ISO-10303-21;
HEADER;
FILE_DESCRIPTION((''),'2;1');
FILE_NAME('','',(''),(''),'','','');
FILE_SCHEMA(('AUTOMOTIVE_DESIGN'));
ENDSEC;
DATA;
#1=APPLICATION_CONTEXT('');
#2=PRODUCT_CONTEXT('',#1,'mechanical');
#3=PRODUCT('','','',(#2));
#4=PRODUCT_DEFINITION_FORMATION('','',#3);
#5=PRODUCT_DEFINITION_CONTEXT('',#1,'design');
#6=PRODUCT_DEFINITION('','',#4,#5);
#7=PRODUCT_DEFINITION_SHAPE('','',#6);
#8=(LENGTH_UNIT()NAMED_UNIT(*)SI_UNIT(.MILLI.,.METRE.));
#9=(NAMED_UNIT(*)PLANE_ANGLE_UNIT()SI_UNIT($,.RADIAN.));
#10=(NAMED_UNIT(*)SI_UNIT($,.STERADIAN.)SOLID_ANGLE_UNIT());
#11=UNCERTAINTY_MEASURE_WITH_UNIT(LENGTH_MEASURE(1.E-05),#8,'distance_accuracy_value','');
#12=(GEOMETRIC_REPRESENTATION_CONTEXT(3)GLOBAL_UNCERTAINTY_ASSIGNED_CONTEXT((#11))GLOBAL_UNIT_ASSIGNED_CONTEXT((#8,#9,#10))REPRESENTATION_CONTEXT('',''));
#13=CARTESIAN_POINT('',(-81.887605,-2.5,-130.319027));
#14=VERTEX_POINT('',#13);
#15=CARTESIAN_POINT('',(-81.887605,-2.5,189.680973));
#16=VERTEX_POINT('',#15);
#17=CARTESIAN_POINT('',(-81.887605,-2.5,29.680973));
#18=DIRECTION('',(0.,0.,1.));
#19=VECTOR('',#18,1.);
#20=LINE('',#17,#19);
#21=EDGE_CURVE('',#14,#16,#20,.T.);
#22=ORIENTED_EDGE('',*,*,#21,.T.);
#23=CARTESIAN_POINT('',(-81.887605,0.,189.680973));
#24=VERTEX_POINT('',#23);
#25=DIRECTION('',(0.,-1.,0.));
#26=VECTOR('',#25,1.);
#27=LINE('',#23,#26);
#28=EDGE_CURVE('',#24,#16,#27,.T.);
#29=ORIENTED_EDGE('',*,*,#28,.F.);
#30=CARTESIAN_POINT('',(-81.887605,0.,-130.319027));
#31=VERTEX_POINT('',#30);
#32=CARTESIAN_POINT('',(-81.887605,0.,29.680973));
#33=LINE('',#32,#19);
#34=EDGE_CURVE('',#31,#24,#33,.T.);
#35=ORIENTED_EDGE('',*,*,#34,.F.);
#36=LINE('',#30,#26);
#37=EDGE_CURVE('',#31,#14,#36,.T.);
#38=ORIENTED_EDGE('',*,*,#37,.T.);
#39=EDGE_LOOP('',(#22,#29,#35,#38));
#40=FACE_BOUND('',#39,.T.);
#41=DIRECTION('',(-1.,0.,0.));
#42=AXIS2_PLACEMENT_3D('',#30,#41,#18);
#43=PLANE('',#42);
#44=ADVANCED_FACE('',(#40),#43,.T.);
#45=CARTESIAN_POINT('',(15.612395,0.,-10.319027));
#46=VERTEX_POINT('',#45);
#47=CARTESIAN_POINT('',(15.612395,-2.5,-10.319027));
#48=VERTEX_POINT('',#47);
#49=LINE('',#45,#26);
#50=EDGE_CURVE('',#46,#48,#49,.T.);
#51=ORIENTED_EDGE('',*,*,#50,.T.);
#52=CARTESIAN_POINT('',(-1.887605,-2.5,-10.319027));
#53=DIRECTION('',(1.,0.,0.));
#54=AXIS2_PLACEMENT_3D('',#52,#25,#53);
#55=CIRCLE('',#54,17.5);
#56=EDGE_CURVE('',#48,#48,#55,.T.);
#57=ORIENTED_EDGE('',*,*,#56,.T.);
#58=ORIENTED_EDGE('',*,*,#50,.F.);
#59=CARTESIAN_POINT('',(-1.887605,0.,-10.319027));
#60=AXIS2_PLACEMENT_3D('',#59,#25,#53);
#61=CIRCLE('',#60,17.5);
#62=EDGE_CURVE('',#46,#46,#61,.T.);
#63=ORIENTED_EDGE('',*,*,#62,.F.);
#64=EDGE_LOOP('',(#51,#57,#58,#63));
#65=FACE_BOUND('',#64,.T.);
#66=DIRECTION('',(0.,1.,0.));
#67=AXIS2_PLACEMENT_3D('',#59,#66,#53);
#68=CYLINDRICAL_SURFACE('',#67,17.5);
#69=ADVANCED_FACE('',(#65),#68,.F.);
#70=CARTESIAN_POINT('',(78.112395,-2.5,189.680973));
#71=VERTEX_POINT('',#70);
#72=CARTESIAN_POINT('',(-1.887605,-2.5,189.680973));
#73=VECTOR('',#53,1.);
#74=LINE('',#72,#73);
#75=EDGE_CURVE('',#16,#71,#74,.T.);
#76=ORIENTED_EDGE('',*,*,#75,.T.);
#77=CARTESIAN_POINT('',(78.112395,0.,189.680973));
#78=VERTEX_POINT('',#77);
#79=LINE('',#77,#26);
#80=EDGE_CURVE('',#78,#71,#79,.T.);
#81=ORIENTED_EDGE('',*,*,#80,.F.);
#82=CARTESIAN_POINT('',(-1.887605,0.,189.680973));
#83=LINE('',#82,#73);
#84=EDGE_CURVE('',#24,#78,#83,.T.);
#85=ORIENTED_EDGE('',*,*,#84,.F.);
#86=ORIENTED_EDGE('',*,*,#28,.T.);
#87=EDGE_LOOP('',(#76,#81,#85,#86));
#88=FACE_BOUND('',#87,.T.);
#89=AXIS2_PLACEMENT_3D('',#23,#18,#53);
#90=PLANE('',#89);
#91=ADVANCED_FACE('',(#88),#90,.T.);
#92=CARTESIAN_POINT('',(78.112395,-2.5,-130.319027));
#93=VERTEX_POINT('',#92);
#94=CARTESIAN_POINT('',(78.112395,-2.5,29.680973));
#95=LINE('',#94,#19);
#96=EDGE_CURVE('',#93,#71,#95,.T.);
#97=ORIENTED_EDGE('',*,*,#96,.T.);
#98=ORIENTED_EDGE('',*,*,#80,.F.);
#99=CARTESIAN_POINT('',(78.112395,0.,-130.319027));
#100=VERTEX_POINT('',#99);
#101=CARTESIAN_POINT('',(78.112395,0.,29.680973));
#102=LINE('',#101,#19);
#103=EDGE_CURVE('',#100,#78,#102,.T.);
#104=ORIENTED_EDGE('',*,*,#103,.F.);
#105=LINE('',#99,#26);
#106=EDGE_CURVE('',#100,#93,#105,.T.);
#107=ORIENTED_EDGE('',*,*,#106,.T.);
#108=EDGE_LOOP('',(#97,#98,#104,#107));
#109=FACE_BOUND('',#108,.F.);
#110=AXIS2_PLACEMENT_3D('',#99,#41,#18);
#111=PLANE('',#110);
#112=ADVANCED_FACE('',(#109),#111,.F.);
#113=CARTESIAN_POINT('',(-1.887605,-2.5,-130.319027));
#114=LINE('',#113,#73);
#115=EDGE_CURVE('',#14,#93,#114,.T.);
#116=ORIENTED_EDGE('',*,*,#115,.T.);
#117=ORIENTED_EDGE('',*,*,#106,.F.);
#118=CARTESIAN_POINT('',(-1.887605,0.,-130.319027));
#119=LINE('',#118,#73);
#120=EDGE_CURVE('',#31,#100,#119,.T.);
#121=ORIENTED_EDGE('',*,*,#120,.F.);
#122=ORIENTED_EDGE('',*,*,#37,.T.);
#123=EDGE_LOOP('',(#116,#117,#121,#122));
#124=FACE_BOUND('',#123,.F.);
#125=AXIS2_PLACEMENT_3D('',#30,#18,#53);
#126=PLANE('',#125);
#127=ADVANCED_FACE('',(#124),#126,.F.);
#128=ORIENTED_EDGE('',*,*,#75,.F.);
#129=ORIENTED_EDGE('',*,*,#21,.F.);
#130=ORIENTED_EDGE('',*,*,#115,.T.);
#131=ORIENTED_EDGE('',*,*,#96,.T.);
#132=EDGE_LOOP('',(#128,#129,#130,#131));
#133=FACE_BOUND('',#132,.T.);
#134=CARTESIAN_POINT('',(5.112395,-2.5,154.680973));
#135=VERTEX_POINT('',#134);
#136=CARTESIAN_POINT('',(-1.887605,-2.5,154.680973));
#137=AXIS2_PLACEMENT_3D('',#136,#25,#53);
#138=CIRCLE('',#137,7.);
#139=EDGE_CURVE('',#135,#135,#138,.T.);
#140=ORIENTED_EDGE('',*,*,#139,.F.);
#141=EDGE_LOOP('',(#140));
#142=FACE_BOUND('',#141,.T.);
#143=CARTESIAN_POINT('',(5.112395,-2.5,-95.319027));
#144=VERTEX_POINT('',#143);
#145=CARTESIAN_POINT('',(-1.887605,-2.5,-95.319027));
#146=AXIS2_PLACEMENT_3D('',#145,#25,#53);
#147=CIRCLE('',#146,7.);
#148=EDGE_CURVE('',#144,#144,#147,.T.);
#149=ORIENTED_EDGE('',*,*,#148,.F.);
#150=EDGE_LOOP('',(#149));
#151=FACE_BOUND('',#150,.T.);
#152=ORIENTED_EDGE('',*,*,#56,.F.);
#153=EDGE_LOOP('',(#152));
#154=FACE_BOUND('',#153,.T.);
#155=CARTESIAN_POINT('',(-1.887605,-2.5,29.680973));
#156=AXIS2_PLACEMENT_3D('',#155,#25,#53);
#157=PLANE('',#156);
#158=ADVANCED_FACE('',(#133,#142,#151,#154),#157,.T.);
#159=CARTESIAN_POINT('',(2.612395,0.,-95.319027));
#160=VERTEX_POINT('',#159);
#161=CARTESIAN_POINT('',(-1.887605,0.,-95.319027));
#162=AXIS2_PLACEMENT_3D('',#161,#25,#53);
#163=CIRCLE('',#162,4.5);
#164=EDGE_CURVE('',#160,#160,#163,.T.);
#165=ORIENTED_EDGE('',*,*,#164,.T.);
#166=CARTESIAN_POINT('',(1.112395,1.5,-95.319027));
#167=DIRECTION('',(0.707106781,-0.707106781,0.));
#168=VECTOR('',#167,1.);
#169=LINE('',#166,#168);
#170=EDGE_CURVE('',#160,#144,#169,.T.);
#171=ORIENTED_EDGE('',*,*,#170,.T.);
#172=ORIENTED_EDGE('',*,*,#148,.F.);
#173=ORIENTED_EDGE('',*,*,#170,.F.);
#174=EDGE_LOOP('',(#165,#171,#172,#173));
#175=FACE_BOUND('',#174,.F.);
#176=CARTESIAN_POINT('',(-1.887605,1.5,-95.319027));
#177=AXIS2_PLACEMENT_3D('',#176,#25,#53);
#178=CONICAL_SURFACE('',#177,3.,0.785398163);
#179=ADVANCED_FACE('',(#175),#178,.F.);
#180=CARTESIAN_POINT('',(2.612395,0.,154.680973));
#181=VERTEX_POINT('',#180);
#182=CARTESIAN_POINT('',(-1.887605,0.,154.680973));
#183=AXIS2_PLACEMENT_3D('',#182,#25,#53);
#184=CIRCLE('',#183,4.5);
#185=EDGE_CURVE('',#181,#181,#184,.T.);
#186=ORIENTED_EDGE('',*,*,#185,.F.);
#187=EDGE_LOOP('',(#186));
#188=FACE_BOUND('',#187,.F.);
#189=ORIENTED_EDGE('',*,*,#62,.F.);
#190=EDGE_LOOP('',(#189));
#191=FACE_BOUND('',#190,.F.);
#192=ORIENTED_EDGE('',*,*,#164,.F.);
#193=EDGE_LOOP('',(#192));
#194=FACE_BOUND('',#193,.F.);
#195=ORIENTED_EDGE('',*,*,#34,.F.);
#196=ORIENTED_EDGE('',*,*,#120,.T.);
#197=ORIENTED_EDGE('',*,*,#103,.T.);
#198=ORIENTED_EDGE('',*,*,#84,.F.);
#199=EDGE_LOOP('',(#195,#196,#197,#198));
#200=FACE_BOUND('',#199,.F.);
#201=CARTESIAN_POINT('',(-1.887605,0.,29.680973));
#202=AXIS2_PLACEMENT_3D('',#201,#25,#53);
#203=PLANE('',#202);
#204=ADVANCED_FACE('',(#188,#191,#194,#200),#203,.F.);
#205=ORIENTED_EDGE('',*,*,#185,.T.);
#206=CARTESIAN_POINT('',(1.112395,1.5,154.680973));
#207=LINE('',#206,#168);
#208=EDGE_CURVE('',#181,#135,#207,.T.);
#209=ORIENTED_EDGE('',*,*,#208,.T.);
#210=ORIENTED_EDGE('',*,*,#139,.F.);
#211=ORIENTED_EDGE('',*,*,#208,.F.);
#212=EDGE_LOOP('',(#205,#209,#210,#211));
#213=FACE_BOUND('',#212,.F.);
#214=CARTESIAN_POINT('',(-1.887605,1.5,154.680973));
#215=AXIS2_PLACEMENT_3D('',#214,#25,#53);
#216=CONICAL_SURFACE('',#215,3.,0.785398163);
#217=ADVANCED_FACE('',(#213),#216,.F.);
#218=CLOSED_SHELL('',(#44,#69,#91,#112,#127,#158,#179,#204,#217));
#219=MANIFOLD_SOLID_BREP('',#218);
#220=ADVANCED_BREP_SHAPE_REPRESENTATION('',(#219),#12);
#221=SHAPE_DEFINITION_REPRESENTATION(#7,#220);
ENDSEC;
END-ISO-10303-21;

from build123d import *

# Parameters (mm, degrees)
F0_W     = 160
F0_H     = 320
F0_R     = 3
F0_R_2   = 17.5
F1_DEPTH = 2.5


# Not quite as in the source:
# - a fillet or chamfer that OpenCascade refuses, or shapes differently, is made with other operations: its cross-section is extruded or revolved along the edge and cut away or added


with BuildPart() as f1:
    # F0 (on Front) → F1 (new body)
    with BuildSketch(Plane.XZ):
        with Locations((-1.8876045942, 29.6809725389)):
            Rectangle(F0_W, F0_H)
        with Locations((-1.8876045942, -95.3190274611)):
            Circle(F0_R, mode=Mode.SUBTRACT)
        with Locations((-1.8876045942, -10.3190274611)):
            Circle(F0_R_2, mode=Mode.SUBTRACT)
        with Locations((-1.8876045942, 154.6809725389)):
            Circle(F0_R, mode=Mode.SUBTRACT)
    extrude(amount=F1_DEPTH)

    # F2: chamfer of 4 on 2 edges, made by hand

    # F2_s1 → F2_t2 (revolve, cut)
    with BuildSketch(Plane.XY.offset(154.6809725389)):
        Polygon((1.1123954058, 1.5), (5.1123954058, -2.5), (1.1123954058, -2.5), align=None)
    revolve(axis=Axis((-1.8876045942, -2.5, 154.6809725389), (0, -1, 0)), mode=Mode.SUBTRACT)

    # F2_s3 → F2_t4 (revolve, cut)
    with BuildSketch(Plane.XY.offset(-95.3190274611)):
        Polygon((1.1123954058, 1.5), (5.1123954058, -2.5), (1.1123954058, -2.5), align=None)
    revolve(axis=Axis((-1.8876045942, -2.5, -95.3190274611), (0, -1, 0)), mode=Mode.SUBTRACT)


solid = f1.part
